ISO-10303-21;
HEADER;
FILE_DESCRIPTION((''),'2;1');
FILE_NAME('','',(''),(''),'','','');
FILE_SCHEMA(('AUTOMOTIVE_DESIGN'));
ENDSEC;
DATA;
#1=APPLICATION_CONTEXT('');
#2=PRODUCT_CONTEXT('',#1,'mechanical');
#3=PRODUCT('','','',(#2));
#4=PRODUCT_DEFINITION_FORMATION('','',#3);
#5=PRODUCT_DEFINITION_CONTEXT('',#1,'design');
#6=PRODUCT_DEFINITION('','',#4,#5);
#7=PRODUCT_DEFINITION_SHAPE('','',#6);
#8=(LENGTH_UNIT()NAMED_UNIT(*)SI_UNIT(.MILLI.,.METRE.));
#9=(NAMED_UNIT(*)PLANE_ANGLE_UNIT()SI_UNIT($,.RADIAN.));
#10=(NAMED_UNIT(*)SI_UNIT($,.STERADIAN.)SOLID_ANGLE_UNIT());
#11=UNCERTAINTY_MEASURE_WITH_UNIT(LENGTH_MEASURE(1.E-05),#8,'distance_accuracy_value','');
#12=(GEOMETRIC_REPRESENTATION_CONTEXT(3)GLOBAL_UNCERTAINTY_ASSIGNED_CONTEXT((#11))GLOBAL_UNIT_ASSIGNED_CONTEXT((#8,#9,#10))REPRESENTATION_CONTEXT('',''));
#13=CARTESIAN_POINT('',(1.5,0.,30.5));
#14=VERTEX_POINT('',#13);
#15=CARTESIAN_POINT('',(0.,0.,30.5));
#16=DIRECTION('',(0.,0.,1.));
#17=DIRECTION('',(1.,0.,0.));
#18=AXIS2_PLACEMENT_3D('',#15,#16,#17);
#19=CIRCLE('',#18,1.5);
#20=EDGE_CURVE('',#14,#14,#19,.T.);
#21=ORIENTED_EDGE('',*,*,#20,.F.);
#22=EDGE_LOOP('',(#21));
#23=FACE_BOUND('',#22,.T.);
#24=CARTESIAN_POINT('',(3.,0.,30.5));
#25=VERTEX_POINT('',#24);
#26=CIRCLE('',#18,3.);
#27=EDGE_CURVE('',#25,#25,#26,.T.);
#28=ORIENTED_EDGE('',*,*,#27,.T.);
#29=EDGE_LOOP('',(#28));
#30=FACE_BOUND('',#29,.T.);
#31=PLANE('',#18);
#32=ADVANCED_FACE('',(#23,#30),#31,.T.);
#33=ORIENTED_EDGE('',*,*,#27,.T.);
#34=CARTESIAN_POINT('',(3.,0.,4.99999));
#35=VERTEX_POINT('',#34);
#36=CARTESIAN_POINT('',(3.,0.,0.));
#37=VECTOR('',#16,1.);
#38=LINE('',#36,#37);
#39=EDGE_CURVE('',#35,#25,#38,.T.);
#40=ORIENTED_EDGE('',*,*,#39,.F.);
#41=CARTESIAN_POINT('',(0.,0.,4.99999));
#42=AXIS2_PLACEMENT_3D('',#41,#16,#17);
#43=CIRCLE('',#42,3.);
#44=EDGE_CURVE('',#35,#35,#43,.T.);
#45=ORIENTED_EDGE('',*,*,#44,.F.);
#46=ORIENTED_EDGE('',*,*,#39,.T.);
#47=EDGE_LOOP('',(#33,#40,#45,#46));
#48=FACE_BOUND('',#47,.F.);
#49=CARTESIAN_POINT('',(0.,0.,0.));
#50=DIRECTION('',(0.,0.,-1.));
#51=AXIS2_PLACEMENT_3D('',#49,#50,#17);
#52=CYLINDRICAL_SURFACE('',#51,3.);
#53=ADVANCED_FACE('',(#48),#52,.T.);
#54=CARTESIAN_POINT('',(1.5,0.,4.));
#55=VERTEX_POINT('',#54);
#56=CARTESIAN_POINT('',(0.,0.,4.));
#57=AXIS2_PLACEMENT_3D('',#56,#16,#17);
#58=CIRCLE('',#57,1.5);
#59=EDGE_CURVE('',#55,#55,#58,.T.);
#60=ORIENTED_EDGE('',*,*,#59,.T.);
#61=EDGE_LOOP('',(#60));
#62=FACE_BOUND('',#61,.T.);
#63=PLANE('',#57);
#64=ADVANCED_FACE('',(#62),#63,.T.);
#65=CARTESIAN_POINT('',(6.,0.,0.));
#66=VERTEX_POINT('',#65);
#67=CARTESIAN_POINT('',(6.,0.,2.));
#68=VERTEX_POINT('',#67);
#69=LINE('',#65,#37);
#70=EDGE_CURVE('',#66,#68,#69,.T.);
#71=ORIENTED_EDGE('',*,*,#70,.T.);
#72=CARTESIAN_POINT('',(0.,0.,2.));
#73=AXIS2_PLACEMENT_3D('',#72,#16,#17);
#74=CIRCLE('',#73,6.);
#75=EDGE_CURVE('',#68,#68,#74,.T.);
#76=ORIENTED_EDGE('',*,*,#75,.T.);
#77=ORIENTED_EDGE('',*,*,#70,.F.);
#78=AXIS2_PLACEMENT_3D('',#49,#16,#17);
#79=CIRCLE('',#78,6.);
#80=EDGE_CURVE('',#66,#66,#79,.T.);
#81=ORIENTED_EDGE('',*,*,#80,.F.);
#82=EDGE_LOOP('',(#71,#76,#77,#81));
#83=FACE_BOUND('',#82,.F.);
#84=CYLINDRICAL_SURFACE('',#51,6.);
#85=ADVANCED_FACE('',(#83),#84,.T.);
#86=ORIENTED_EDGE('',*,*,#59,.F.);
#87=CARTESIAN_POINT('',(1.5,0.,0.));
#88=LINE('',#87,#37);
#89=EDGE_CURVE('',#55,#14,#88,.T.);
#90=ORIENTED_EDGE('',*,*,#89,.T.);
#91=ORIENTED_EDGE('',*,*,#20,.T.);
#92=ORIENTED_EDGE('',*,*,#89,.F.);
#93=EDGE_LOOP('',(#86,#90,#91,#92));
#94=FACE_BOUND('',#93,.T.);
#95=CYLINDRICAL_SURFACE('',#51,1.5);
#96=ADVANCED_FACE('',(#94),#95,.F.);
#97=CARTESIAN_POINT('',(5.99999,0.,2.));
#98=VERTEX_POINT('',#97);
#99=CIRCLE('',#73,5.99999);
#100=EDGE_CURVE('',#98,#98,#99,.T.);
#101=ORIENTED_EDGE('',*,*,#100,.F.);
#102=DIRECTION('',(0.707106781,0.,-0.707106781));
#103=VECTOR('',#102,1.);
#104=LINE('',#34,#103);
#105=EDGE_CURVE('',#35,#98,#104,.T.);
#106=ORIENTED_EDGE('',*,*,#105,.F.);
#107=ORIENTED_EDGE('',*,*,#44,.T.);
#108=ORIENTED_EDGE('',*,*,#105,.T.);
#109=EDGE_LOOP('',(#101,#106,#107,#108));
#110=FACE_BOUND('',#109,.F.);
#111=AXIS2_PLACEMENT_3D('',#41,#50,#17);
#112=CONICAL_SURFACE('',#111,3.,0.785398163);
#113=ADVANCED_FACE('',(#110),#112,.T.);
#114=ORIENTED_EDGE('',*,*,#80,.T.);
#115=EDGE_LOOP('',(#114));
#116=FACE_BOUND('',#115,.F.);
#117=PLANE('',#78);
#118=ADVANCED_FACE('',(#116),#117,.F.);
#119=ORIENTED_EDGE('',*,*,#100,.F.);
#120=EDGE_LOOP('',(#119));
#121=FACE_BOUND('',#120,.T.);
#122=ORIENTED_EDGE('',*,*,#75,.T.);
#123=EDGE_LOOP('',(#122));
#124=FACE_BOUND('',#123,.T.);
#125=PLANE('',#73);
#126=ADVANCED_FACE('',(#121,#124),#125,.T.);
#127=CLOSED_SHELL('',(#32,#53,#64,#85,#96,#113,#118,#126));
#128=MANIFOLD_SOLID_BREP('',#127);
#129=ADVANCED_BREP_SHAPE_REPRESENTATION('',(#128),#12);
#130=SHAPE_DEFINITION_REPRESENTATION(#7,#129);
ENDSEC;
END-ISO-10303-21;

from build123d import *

# Parameters (mm, degrees)
F0_R     = 6
F0_R_2   = 3
F1_DEPTH = 2
F0_R_3   = 1.5
F2_DEPTH = 4
F4_DEPTH = 30.5
F5_SIZE  = 2.99999


# Not quite as in the source:
# - a fillet or chamfer is up to 0.001 mm smaller than in the source, because OpenCascade refuses the exact size


with BuildPart() as f1:
    # F0 (on Top) → F1 (new body)
    with BuildSketch(Plane.XY):
        Circle(F0_R)
        Circle(F0_R_2, mode=Mode.SUBTRACT)
    extrude(amount=F1_DEPTH)



with BuildPart() as f2:
    # F0 (on Top) → F2 (new body)
    with BuildSketch(Plane.XY):
        Circle(F0_R_3)
    extrude(amount=F2_DEPTH)


with BuildPart() as f1_1:
    add(f1.part)

    add(f2.part)  # F4 merges F2
    # F0 (on Top) → F4 (join)
    with BuildSketch(Plane.XY):
        Circle(F0_R_2)
        Circle(F0_R_3, mode=Mode.SUBTRACT)
    extrude(amount=F4_DEPTH)

    # F5 (size 3 in the source; OpenCascade refuses exactly that, so slightly less here)
    f5_edges = [f1_1.edges().sort_by_distance(p)[0] for p in [
        (-3, 0, 2),
    ]]
    chamfer(f5_edges, length=F5_SIZE)


solid = f1_1.part
